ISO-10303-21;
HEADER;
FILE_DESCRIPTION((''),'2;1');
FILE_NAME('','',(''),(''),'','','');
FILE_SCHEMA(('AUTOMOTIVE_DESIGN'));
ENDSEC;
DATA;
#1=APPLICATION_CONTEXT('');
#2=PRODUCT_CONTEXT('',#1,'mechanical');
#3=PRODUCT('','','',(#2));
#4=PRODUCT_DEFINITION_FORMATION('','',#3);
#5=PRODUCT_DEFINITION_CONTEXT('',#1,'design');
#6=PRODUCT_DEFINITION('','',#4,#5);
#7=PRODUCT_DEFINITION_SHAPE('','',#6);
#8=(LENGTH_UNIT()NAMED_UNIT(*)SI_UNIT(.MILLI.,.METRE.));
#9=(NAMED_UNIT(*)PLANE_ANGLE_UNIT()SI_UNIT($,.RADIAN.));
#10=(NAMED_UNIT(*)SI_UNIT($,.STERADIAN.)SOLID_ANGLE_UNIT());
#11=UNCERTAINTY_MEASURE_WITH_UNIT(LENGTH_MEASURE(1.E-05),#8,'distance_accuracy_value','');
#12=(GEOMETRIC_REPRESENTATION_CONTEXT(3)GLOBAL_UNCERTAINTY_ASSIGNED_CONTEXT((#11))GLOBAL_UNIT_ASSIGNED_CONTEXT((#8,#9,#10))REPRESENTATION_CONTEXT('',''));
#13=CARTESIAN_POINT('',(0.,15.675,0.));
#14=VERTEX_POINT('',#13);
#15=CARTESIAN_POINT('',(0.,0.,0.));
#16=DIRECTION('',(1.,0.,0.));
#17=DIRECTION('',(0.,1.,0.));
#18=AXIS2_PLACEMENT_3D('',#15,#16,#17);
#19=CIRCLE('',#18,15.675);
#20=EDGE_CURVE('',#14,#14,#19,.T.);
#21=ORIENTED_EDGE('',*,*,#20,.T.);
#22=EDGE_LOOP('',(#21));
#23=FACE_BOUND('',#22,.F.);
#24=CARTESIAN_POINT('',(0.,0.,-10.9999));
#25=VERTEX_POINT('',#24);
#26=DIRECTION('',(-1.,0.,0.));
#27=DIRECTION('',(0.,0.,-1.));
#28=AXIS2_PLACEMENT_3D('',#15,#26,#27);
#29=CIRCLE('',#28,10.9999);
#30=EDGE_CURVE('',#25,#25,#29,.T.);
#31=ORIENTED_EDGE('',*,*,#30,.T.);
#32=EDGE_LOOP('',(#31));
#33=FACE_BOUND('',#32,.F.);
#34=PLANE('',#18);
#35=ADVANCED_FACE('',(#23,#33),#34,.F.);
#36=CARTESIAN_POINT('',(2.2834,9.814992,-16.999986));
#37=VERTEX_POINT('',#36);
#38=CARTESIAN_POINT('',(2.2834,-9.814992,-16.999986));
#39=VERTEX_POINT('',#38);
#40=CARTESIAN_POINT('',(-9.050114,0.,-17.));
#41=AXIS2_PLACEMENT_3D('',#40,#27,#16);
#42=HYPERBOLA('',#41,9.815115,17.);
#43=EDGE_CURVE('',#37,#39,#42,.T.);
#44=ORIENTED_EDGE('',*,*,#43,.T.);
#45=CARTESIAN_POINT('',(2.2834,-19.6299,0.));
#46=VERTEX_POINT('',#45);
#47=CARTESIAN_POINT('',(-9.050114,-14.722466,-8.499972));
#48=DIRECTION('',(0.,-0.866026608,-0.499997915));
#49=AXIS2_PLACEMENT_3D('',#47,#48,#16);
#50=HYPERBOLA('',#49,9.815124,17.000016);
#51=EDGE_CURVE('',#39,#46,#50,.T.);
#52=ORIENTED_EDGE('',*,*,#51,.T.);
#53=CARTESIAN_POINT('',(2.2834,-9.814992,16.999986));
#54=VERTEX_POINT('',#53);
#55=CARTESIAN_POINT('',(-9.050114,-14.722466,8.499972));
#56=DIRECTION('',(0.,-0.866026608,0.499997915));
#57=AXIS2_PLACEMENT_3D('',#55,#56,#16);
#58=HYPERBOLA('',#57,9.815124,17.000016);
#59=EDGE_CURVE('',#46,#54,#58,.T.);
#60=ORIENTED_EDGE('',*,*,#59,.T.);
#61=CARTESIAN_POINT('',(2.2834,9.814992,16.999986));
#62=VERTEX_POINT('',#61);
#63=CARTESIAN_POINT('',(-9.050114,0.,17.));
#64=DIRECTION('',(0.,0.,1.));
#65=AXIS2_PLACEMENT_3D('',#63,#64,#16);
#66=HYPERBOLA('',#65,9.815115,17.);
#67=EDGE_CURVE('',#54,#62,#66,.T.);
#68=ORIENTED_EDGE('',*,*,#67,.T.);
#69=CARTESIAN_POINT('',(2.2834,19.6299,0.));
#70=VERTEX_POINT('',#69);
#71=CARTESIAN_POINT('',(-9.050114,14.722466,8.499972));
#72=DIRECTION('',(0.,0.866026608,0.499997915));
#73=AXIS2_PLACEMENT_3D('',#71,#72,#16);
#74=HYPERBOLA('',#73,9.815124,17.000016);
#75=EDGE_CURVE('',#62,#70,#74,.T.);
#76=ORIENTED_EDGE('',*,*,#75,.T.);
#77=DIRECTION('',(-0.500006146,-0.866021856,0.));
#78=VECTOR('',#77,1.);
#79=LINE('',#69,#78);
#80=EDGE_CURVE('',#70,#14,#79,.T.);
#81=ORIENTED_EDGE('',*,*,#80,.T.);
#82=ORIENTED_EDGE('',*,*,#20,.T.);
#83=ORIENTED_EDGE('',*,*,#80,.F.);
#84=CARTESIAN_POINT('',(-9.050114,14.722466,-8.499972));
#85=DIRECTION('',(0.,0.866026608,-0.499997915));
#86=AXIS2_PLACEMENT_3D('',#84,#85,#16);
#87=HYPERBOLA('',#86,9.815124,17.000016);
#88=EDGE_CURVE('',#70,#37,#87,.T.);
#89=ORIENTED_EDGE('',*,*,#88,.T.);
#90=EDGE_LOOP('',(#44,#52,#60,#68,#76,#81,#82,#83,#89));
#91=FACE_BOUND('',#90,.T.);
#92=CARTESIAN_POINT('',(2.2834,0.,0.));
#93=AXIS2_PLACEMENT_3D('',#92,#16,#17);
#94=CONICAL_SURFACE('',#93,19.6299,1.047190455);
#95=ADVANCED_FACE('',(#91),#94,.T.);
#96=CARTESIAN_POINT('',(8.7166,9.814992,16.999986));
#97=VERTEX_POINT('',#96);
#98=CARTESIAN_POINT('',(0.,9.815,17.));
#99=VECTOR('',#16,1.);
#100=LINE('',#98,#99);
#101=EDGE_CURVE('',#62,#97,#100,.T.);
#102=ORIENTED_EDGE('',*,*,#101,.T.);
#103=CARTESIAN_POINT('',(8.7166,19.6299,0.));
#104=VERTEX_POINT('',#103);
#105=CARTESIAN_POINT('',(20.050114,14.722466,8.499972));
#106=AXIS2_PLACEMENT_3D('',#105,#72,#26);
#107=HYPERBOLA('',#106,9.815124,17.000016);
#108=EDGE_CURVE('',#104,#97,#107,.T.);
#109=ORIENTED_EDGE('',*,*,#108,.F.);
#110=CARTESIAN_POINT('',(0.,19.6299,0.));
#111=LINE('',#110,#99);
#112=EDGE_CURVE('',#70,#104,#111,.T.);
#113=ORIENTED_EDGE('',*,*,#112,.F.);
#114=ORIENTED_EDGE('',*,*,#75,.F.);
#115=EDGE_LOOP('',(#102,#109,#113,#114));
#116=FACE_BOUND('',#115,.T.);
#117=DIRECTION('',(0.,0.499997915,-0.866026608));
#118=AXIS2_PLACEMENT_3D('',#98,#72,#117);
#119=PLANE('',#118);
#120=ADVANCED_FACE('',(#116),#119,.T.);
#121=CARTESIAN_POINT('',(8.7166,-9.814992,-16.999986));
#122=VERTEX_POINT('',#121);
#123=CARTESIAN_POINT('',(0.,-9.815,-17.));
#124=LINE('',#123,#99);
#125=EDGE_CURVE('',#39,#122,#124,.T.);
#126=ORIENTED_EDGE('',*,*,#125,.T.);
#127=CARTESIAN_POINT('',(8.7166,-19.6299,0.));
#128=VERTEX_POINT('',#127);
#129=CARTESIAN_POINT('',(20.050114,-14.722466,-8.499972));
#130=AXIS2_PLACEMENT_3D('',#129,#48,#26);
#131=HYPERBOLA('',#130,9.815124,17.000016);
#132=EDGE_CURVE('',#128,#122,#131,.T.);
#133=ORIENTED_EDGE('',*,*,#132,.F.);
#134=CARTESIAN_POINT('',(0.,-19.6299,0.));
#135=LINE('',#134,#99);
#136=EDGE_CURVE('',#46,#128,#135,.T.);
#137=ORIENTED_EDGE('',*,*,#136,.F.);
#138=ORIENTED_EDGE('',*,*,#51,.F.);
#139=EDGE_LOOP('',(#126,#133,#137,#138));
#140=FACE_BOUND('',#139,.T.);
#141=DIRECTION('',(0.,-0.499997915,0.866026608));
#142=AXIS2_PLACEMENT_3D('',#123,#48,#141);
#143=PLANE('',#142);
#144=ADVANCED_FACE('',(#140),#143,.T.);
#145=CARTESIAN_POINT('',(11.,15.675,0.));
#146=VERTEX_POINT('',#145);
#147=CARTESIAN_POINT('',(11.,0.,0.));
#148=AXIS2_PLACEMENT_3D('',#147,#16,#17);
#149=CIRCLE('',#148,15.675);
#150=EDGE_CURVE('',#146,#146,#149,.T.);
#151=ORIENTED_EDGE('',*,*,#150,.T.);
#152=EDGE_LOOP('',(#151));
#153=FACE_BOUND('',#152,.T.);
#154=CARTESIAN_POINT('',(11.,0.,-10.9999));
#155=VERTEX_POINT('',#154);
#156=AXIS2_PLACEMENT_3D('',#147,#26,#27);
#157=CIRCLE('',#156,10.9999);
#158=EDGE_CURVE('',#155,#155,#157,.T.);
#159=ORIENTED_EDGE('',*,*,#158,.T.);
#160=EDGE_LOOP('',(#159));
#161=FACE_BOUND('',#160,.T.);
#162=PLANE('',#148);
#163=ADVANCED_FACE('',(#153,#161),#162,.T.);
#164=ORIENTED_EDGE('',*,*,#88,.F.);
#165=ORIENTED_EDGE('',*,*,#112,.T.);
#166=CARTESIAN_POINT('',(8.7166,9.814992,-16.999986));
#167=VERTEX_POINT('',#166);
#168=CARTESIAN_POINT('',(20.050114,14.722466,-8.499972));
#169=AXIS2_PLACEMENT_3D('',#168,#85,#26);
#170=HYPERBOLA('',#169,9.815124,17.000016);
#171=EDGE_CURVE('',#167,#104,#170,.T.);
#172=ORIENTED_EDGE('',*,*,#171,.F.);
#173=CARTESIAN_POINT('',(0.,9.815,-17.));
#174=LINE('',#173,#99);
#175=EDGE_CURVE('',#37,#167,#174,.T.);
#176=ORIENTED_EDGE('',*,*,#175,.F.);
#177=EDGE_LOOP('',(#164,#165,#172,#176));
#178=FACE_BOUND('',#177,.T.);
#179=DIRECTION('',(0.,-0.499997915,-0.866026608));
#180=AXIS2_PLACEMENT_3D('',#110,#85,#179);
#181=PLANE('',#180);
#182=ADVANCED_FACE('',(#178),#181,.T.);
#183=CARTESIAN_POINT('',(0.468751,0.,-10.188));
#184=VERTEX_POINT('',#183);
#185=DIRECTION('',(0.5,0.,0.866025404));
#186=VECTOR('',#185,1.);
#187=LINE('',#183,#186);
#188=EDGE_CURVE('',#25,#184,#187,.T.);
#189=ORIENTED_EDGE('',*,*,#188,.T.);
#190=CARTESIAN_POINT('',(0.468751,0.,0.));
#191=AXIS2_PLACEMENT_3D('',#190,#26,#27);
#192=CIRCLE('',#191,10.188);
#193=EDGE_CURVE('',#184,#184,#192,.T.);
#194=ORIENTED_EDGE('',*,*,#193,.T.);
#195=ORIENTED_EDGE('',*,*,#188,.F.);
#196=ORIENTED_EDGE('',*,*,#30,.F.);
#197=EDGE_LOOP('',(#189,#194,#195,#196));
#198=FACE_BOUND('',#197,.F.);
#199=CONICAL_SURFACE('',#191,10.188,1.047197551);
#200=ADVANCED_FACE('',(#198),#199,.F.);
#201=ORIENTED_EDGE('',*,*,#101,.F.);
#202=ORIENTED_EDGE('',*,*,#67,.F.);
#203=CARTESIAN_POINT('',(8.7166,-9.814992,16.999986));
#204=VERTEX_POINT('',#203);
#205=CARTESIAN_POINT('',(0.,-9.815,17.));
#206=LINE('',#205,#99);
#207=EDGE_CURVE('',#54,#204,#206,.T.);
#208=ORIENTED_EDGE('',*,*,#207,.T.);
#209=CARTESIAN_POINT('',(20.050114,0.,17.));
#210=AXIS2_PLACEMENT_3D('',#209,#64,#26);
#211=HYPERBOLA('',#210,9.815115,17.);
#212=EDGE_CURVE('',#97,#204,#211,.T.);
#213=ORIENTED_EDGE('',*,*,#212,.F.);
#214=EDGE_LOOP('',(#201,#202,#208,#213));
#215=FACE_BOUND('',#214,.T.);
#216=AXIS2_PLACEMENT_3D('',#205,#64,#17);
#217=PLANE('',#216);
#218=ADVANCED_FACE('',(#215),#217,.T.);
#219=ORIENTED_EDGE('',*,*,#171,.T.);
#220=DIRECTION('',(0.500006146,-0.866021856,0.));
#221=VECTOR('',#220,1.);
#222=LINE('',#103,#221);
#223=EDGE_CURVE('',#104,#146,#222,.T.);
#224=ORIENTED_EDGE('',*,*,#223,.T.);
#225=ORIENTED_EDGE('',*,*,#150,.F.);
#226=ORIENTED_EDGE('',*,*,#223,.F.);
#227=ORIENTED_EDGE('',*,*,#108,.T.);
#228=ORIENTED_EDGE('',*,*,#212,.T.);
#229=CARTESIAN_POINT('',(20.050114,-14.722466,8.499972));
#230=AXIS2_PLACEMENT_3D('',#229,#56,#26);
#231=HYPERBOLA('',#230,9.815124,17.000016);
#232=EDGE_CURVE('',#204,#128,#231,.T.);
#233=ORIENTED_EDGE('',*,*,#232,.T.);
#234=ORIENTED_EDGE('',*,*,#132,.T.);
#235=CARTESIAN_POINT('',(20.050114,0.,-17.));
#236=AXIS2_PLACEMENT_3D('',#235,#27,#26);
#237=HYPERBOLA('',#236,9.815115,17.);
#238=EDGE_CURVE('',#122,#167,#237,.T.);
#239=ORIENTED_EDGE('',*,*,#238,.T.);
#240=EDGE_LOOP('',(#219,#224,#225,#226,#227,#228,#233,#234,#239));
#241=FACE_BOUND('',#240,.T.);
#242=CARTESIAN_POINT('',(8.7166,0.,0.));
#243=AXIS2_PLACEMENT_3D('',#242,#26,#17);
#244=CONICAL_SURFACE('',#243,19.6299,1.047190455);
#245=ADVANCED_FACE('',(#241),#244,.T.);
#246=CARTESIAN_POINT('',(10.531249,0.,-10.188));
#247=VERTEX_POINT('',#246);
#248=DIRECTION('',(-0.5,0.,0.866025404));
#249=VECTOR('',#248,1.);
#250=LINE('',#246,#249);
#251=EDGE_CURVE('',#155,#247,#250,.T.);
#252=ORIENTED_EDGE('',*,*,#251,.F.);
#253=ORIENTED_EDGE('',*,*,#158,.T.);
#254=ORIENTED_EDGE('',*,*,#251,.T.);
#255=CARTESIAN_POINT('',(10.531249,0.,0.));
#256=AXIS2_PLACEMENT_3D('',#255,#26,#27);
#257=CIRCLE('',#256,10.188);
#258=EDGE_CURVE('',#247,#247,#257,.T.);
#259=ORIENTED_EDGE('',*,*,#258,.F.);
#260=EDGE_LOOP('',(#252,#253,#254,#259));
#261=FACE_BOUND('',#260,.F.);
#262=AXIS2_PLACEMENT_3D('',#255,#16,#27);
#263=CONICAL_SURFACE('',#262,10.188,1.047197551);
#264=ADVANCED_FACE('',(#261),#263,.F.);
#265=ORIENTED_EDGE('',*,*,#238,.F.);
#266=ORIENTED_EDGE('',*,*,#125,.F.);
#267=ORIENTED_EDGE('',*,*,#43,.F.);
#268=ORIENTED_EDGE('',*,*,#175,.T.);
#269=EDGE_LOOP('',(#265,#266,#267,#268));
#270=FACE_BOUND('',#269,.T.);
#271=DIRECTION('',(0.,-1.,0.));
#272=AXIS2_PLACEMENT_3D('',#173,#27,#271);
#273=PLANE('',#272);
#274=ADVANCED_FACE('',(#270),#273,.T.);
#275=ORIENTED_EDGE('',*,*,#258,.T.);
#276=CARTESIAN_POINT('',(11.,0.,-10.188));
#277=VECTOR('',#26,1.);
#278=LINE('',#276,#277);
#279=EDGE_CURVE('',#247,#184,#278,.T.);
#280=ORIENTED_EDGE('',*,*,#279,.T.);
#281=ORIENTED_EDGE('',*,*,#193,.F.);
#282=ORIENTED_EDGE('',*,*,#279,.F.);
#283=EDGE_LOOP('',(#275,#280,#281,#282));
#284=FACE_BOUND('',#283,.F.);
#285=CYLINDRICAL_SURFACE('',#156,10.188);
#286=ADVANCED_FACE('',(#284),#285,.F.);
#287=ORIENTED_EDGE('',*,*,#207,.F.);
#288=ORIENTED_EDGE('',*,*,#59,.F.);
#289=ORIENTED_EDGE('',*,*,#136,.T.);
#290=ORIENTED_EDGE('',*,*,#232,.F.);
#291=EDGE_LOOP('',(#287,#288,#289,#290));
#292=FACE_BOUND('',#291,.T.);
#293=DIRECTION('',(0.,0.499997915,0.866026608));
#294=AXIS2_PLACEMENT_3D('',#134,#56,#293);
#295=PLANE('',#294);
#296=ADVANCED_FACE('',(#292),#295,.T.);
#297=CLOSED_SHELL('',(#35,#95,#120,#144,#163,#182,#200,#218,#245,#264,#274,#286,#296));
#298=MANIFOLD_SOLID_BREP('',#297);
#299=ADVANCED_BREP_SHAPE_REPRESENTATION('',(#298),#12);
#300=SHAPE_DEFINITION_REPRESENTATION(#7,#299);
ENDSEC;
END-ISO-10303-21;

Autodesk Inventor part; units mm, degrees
ref_plane "YZ Plane" through (0, 0, 0) normal (1, 0, 0) x (0, 1, 0)
ref_plane "XZ Plane" through (0, 0, 0) normal (0, 1, 0) x (-1, 0, 0)
sketch "Sketch1" plane through (0, 0, 0) normal (1, 0, 0) x (0, 1, 0)
  line L0 (-19.6299, 0) -> (-9.815, 17)
  line L1 (-9.815, 17) -> (9.815, 17)
  line L2 (9.815, 17) -> (19.6299, 0)
  line L3 (19.6299, 0) -> (9.815, -17)
  line L4 (9.815, -17) -> (-9.815, -17)
  line L5 (-9.815, -17) -> (-19.6299, 0)
  point P0 (0, 0)
  point P1 (0, 0)
  dimension "d0" = 39.2598
extrude "Body" add sketch "Sketch1" along normal blind 11
sketch "Sketch2" plane through (0, 0, 0) normal (0, 0, 1) x (1, 0, 0)
  line L0 (0, 9.815) -> (0, 19.6299) projected
  line L1 (0, 19.6299) -> (11, 19.6299) projected
  line L2 (11, 9.815) -> (11, 19.6299) projected
  line L3 (-2.2, 0) -> (13.2, 0) projected
  line L4 (2.2834, 19.6299) -> (0, 15.675)
  line L5 (8.7166, 19.6299) -> (11, 15.675)
  dimension "d3" = 30
  dimension "d4" = 30
  dimension "d5" = 31.35
  dimension "d6" = 31.35
revolve "Chamfer1" cut sketch "Sketch2" angle 360 about axis through (-10, 0, 0) along (1, 0, 0)
sketch "Sketch3" plane through (11, 0, 0) normal (1, 0, 0) x (0, 0, -1)
  arc A0 (-0.625, -1.0825) -> (0.625, -1.0825) centre (0, 0) ccw projected
hole "Thread" at (11, 0, 0) direction (-1, 0, 0) diameter 20.376 end through all thread size "M22x1.5" class "6H" standard "ISO Metric profile"
chamfer "Chamfer2" distance 0.8119 angle 30 1 edges at (11, 0, 10.188) measured on face at (11, 13.6694, -1.6598)
chamfer "Chamfer3" distance 0.8119 angle 30 1 edges at (0, 0, 10.188) measured on face at (0, 13.6694, -1.6598)
ref_plane "Work Plane1" through (-42.3267, 0, 0) normal (0, -0.8660254, -0.5) x (1, 0, 0)
equation "\"d0\" = 1.1547 * SW"
equation "\"d1\" = KOH"
equation "\"d3\" = ANG1"
equation "\"d4\" = ANG2"
equation "\"d5\" = SW0"
equation "\"d6\" = SW01"
equation "\"d8\" = -0.5 * GD1 + 0.5 * NND"
equation "\"d40\" = -0.5 * GD1 + 0.5 * NND"
equation "\"d10\" = -0.5 * GD1 + 0.5 * NND"
equation "\"d41\" = -0.5 * GD1 + 0.5 * NND"
equation "\"ANG1\" = 30deg"
equation "\"ANG2\" = 30deg"
equation "\"NND\" = 22"
equation "\"KOH\" = 11"
equation "\"SW\" = 34"
equation "\"SW0\" = 31.35"
equation "\"SW01\" = SW0"
equation "\"GUL\" = 0.541266 * PTC"
equation "\"THREADDIA\" = 22"
equation "\"TOA\" = 30deg"
equation "\"PTC\" = 1.5"
equation "\"E0\" = 37.29"
equation "\"GAL\" = 0.541266 * PTC"
equation "\"GD1\" = 20.376202"
properties part number "ISO 8675 - M22 x 1.5" material "Stainless Steel, 440C"
